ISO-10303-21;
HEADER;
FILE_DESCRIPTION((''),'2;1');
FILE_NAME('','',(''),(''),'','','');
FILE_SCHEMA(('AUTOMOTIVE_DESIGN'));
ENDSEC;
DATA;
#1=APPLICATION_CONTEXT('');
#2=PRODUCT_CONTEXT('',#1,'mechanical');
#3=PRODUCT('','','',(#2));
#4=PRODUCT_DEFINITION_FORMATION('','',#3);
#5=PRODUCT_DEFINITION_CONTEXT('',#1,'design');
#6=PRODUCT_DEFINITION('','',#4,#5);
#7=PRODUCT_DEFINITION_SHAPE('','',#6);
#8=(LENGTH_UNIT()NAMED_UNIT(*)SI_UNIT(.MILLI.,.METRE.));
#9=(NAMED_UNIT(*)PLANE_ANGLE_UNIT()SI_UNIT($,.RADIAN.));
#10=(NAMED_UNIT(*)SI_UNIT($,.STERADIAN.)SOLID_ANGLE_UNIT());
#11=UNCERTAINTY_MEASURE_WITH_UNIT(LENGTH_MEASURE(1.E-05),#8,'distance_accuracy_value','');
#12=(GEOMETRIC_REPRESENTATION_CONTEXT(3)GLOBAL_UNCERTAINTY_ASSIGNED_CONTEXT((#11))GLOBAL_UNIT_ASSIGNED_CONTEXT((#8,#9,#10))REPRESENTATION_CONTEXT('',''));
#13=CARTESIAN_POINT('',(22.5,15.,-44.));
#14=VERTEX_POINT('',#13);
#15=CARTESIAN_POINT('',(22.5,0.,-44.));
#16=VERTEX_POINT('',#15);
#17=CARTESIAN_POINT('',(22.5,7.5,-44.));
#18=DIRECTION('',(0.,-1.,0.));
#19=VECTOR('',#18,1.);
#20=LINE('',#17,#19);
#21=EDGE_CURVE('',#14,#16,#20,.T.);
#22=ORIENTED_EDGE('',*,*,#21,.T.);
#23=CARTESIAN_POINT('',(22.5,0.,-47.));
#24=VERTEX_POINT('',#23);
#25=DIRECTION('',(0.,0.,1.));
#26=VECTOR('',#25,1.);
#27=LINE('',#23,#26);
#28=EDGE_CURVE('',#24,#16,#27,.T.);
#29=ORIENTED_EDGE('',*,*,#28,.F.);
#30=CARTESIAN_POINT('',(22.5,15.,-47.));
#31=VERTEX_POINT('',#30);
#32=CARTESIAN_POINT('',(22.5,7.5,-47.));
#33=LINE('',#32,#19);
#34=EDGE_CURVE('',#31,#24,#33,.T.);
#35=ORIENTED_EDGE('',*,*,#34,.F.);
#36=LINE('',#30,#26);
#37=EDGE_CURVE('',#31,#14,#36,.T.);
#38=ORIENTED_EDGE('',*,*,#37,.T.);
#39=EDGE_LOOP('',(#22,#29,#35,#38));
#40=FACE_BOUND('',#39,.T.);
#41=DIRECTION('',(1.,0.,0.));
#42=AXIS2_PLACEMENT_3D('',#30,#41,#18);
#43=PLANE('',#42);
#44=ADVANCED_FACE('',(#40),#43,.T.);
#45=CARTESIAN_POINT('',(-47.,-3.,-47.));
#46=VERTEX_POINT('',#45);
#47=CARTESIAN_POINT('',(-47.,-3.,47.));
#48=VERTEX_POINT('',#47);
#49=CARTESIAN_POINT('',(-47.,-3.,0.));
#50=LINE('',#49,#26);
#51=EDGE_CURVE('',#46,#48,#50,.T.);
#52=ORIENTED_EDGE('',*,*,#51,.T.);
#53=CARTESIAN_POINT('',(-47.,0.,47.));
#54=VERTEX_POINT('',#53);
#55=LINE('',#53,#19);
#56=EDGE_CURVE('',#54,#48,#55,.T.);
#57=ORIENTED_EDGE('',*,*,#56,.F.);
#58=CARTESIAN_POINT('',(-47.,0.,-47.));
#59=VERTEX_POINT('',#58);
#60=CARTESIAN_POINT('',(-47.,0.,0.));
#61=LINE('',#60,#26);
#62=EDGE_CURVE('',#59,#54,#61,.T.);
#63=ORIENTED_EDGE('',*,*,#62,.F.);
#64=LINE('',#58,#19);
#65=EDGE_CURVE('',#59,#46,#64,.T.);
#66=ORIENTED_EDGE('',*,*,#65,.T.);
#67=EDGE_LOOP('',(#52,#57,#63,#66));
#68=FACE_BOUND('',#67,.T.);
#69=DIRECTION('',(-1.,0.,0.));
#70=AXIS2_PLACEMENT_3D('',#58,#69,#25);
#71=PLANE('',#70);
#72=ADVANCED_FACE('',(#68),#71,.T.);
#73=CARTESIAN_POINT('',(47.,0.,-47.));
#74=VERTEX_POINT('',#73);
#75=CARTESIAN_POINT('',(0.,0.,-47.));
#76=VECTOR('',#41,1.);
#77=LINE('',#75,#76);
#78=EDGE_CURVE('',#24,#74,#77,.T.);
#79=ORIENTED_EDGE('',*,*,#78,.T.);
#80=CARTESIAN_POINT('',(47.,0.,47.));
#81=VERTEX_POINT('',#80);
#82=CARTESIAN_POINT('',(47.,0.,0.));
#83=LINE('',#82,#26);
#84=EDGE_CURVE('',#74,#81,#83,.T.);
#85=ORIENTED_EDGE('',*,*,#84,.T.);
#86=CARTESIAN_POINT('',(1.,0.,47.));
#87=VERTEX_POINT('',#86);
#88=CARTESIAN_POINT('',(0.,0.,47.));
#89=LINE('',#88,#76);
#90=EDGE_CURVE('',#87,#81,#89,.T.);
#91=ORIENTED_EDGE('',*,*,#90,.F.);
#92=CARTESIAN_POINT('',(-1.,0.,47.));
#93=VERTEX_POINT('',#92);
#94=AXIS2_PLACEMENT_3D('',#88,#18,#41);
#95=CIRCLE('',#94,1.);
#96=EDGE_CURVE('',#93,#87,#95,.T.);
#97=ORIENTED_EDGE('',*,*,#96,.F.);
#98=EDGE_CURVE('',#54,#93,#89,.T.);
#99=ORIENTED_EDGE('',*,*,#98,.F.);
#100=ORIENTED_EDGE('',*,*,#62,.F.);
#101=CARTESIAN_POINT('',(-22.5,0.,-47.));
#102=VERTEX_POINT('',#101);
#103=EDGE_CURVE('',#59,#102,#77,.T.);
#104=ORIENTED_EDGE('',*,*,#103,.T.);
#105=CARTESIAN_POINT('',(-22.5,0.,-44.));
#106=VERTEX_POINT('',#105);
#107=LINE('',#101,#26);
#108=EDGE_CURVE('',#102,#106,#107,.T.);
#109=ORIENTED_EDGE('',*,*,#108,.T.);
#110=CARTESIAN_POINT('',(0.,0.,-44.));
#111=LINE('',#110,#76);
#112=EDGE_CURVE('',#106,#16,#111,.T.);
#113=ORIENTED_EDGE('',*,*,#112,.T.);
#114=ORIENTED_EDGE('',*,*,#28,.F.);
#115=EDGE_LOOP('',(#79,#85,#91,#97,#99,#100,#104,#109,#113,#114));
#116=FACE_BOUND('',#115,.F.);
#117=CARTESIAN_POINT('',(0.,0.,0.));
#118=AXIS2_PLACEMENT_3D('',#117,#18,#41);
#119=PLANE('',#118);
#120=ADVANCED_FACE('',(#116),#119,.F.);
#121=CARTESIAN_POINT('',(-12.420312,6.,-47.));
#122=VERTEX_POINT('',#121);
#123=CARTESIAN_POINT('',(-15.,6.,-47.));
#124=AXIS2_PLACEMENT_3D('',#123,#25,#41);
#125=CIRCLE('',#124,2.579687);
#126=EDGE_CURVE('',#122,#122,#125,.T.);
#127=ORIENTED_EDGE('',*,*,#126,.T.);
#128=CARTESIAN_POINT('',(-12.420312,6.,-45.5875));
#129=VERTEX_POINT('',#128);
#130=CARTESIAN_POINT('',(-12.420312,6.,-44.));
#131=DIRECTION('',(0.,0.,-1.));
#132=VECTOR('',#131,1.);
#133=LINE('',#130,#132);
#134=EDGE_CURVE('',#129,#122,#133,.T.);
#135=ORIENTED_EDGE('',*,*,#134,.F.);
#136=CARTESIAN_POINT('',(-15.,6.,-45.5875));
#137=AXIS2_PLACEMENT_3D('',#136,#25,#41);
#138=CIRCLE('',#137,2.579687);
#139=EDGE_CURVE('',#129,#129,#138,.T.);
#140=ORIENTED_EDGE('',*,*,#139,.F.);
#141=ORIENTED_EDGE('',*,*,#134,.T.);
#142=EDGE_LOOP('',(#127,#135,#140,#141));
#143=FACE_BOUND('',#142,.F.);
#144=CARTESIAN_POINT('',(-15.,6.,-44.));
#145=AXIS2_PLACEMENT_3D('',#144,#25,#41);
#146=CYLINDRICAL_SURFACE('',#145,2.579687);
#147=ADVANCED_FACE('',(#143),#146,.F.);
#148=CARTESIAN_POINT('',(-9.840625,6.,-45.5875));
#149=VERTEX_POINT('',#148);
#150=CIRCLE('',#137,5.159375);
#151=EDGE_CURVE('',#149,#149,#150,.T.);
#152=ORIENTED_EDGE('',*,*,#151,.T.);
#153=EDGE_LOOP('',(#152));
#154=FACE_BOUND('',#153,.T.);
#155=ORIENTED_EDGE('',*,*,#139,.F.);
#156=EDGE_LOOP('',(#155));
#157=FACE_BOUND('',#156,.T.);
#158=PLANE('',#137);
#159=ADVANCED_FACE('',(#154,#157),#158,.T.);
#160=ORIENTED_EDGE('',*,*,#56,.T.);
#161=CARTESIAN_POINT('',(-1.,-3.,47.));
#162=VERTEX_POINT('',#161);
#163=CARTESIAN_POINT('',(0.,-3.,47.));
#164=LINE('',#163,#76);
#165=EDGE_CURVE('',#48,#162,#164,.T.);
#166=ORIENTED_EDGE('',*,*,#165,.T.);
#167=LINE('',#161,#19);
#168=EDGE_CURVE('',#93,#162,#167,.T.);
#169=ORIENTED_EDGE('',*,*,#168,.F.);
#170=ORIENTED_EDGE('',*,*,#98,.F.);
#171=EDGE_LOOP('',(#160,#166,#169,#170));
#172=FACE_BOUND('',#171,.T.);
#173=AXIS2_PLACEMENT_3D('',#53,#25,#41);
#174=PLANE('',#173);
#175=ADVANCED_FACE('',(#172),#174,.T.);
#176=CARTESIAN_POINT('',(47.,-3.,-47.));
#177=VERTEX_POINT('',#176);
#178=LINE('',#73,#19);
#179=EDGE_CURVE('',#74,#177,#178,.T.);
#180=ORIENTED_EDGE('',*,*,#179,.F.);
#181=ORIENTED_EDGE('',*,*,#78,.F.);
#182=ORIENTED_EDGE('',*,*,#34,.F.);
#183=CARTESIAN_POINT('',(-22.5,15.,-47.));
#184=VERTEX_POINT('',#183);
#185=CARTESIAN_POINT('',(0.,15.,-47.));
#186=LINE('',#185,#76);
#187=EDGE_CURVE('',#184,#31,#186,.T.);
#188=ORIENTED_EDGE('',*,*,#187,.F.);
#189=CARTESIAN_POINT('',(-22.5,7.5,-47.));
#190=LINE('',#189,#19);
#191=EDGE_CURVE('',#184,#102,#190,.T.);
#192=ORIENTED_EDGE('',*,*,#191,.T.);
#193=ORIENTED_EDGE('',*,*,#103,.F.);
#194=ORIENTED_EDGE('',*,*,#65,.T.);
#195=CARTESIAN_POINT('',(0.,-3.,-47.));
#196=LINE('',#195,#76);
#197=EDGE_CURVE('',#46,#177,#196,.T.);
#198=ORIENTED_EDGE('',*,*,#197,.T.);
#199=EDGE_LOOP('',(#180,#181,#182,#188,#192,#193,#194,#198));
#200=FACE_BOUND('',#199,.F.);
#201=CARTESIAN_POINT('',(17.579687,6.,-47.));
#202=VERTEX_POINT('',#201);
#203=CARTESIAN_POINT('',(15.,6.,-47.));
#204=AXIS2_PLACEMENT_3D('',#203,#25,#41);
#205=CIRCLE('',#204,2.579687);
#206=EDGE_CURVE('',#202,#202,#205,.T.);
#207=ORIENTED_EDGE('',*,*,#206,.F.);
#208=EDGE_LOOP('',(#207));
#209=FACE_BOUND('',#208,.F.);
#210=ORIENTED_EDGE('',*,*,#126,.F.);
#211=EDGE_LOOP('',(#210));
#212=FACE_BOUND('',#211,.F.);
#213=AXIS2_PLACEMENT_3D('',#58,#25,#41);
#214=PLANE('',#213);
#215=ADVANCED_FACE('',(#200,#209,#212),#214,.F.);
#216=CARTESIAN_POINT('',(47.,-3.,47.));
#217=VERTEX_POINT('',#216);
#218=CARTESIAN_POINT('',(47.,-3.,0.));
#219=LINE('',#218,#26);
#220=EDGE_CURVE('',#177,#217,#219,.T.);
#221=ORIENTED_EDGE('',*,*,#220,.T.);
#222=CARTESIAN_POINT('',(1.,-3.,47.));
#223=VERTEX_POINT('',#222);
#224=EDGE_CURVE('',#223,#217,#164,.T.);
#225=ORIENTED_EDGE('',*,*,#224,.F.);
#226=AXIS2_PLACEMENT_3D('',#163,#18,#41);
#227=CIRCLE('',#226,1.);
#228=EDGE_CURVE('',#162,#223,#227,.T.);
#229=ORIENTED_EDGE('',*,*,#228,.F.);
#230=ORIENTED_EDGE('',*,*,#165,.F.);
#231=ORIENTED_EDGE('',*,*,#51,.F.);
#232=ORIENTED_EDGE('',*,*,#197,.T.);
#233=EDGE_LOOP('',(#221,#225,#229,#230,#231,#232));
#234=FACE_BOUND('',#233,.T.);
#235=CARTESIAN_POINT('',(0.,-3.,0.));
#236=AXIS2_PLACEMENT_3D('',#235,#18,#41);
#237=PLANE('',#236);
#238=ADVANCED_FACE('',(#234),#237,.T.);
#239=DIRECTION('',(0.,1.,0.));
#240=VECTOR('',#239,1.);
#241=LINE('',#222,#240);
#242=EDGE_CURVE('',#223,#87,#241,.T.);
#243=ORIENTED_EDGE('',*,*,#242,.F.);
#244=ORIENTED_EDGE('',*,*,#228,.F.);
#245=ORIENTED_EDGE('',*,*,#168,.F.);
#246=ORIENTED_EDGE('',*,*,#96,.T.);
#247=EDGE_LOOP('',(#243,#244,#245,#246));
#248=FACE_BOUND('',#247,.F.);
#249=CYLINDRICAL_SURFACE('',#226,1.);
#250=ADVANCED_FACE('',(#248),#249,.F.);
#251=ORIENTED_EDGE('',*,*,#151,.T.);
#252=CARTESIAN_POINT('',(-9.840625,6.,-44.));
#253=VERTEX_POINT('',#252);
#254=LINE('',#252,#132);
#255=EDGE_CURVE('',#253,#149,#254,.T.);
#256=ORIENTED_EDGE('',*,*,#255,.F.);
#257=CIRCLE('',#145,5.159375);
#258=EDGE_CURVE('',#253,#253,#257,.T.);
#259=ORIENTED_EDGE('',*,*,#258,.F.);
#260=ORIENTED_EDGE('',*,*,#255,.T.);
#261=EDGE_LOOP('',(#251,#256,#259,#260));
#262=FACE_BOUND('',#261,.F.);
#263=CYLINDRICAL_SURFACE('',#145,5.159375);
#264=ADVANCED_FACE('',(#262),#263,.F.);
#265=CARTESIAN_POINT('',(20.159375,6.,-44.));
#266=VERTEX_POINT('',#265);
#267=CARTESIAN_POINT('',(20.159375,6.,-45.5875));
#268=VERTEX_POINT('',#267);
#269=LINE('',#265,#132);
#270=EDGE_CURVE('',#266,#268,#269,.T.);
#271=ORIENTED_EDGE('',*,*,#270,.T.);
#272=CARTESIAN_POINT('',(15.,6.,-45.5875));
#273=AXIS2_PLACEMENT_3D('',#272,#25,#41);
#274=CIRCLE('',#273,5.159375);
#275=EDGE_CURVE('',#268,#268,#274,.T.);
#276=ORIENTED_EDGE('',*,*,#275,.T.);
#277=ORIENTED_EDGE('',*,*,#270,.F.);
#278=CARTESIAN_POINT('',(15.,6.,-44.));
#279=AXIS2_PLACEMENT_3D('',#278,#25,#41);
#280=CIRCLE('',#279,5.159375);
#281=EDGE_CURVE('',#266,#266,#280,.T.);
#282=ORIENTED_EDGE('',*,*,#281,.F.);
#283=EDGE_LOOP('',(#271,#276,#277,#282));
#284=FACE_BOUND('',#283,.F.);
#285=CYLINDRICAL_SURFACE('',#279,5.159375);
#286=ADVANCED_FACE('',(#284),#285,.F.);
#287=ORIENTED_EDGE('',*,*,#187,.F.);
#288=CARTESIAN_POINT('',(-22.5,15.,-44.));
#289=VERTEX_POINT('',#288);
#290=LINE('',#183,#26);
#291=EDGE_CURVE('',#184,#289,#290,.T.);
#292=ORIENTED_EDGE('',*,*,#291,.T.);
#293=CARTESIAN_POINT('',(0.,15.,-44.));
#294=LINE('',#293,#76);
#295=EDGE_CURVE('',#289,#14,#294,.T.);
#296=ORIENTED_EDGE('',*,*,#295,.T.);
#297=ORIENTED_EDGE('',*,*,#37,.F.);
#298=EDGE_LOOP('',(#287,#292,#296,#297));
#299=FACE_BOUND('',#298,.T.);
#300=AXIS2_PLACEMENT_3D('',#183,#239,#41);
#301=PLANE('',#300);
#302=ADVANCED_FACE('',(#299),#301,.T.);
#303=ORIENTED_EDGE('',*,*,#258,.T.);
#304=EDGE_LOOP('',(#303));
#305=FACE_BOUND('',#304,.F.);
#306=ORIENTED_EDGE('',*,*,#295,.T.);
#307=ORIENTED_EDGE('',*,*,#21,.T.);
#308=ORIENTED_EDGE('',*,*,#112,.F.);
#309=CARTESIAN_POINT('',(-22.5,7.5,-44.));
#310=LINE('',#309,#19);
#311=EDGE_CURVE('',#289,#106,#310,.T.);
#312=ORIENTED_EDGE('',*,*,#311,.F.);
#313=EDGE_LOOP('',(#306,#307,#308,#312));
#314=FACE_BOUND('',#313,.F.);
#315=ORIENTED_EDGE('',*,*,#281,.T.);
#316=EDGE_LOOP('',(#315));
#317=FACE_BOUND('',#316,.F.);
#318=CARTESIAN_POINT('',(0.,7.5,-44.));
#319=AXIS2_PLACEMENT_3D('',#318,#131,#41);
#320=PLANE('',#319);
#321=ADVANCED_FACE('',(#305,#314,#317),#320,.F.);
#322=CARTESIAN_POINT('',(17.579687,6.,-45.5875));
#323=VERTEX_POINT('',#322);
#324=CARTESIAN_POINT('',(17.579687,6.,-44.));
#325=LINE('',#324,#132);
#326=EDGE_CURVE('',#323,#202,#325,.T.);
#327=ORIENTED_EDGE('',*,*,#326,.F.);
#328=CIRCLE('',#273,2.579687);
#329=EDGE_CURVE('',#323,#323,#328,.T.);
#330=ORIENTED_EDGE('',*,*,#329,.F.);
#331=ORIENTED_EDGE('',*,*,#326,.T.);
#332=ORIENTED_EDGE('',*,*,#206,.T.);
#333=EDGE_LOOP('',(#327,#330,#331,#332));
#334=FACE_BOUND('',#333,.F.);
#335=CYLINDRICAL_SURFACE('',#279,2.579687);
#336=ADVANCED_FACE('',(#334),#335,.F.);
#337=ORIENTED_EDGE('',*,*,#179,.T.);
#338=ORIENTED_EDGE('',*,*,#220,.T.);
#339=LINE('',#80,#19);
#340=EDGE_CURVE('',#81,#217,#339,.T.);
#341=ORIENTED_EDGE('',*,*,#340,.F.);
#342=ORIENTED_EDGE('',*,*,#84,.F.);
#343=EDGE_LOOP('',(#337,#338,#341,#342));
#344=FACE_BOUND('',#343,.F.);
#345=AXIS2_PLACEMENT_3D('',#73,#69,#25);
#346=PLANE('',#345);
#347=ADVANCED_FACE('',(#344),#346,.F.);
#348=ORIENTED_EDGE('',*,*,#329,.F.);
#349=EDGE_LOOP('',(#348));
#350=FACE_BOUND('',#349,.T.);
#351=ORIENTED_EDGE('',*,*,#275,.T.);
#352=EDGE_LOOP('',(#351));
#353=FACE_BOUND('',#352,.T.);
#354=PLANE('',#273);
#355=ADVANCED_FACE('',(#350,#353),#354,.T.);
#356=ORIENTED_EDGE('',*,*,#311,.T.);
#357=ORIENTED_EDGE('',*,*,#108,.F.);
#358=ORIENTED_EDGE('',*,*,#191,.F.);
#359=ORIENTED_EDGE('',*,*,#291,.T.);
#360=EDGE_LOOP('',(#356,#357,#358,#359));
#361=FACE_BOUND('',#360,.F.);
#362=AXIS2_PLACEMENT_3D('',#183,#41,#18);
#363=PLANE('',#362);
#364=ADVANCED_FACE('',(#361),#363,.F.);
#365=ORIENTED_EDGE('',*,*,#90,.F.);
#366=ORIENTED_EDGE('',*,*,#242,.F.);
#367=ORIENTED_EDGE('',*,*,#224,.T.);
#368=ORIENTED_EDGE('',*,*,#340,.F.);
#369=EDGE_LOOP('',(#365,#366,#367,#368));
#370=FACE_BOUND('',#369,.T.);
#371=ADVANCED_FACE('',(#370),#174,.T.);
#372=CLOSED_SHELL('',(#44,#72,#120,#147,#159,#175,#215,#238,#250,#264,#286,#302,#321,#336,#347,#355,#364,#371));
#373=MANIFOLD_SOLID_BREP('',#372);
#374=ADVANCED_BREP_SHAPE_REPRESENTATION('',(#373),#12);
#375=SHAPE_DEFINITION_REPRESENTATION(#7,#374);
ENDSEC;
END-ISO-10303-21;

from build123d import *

# Parameters (mm, degrees)
F0_W     = 94
F0_H     = 94
F1_DEPTH = 3
F2_W     = 45
F2_H     = 15
F3_DEPTH = 3
F4_R     = 2.5796875
F5_DEPTH = 3.001
F6_R     = 5.159375
F7_DEPTH = 1.5875
F8_R     = 1
F9_DEPTH = 18.001


# Not quite as in the source:
# - a length typed as a fraction of an inch, garbled in the dataset ("3 / 203.2 mm" for 3/8 in), is restored


with BuildPart() as f1:
    # F0 (on Front) → F1 (new body)
    with BuildSketch(Plane.XZ):
        Rectangle(F0_W, F0_H)
    extrude(amount=F1_DEPTH)

    # F2 (on face) → F3 (join)
    with BuildSketch(Plane(origin=(0, 0, -47), x_dir=(1, 0, 0), z_dir=(0, 0, -1))):
        with Locations((0, -7.5)):
            Rectangle(F2_W, F2_H)
    extrude(amount=-F3_DEPTH)

    # F4 (on face) → F5 (cut, through all)
    with BuildSketch(Plane.XY.offset(-44)):
        with Locations((-15, 6)):
            Circle(F4_R)
        with Locations((15, 6)):
            Circle(F4_R)
    extrude(amount=-F5_DEPTH, mode=Mode.SUBTRACT)

    # F6 (on face) → F7 (cut)
    with BuildSketch(Plane.XY.offset(-44)):
        with Locations((-15, 6)):
            Circle(F6_R)
        with Locations((15, 6)):
            Circle(F6_R)
    extrude(amount=-F7_DEPTH, mode=Mode.SUBTRACT)

    # F8 (on face) → F9 (cut, through all)
    with BuildSketch(Plane.XZ.offset(3)):
        with Locations((0, 47)):
            Circle(F8_R)
    extrude(amount=-F9_DEPTH, mode=Mode.SUBTRACT)


solid = f1.part
